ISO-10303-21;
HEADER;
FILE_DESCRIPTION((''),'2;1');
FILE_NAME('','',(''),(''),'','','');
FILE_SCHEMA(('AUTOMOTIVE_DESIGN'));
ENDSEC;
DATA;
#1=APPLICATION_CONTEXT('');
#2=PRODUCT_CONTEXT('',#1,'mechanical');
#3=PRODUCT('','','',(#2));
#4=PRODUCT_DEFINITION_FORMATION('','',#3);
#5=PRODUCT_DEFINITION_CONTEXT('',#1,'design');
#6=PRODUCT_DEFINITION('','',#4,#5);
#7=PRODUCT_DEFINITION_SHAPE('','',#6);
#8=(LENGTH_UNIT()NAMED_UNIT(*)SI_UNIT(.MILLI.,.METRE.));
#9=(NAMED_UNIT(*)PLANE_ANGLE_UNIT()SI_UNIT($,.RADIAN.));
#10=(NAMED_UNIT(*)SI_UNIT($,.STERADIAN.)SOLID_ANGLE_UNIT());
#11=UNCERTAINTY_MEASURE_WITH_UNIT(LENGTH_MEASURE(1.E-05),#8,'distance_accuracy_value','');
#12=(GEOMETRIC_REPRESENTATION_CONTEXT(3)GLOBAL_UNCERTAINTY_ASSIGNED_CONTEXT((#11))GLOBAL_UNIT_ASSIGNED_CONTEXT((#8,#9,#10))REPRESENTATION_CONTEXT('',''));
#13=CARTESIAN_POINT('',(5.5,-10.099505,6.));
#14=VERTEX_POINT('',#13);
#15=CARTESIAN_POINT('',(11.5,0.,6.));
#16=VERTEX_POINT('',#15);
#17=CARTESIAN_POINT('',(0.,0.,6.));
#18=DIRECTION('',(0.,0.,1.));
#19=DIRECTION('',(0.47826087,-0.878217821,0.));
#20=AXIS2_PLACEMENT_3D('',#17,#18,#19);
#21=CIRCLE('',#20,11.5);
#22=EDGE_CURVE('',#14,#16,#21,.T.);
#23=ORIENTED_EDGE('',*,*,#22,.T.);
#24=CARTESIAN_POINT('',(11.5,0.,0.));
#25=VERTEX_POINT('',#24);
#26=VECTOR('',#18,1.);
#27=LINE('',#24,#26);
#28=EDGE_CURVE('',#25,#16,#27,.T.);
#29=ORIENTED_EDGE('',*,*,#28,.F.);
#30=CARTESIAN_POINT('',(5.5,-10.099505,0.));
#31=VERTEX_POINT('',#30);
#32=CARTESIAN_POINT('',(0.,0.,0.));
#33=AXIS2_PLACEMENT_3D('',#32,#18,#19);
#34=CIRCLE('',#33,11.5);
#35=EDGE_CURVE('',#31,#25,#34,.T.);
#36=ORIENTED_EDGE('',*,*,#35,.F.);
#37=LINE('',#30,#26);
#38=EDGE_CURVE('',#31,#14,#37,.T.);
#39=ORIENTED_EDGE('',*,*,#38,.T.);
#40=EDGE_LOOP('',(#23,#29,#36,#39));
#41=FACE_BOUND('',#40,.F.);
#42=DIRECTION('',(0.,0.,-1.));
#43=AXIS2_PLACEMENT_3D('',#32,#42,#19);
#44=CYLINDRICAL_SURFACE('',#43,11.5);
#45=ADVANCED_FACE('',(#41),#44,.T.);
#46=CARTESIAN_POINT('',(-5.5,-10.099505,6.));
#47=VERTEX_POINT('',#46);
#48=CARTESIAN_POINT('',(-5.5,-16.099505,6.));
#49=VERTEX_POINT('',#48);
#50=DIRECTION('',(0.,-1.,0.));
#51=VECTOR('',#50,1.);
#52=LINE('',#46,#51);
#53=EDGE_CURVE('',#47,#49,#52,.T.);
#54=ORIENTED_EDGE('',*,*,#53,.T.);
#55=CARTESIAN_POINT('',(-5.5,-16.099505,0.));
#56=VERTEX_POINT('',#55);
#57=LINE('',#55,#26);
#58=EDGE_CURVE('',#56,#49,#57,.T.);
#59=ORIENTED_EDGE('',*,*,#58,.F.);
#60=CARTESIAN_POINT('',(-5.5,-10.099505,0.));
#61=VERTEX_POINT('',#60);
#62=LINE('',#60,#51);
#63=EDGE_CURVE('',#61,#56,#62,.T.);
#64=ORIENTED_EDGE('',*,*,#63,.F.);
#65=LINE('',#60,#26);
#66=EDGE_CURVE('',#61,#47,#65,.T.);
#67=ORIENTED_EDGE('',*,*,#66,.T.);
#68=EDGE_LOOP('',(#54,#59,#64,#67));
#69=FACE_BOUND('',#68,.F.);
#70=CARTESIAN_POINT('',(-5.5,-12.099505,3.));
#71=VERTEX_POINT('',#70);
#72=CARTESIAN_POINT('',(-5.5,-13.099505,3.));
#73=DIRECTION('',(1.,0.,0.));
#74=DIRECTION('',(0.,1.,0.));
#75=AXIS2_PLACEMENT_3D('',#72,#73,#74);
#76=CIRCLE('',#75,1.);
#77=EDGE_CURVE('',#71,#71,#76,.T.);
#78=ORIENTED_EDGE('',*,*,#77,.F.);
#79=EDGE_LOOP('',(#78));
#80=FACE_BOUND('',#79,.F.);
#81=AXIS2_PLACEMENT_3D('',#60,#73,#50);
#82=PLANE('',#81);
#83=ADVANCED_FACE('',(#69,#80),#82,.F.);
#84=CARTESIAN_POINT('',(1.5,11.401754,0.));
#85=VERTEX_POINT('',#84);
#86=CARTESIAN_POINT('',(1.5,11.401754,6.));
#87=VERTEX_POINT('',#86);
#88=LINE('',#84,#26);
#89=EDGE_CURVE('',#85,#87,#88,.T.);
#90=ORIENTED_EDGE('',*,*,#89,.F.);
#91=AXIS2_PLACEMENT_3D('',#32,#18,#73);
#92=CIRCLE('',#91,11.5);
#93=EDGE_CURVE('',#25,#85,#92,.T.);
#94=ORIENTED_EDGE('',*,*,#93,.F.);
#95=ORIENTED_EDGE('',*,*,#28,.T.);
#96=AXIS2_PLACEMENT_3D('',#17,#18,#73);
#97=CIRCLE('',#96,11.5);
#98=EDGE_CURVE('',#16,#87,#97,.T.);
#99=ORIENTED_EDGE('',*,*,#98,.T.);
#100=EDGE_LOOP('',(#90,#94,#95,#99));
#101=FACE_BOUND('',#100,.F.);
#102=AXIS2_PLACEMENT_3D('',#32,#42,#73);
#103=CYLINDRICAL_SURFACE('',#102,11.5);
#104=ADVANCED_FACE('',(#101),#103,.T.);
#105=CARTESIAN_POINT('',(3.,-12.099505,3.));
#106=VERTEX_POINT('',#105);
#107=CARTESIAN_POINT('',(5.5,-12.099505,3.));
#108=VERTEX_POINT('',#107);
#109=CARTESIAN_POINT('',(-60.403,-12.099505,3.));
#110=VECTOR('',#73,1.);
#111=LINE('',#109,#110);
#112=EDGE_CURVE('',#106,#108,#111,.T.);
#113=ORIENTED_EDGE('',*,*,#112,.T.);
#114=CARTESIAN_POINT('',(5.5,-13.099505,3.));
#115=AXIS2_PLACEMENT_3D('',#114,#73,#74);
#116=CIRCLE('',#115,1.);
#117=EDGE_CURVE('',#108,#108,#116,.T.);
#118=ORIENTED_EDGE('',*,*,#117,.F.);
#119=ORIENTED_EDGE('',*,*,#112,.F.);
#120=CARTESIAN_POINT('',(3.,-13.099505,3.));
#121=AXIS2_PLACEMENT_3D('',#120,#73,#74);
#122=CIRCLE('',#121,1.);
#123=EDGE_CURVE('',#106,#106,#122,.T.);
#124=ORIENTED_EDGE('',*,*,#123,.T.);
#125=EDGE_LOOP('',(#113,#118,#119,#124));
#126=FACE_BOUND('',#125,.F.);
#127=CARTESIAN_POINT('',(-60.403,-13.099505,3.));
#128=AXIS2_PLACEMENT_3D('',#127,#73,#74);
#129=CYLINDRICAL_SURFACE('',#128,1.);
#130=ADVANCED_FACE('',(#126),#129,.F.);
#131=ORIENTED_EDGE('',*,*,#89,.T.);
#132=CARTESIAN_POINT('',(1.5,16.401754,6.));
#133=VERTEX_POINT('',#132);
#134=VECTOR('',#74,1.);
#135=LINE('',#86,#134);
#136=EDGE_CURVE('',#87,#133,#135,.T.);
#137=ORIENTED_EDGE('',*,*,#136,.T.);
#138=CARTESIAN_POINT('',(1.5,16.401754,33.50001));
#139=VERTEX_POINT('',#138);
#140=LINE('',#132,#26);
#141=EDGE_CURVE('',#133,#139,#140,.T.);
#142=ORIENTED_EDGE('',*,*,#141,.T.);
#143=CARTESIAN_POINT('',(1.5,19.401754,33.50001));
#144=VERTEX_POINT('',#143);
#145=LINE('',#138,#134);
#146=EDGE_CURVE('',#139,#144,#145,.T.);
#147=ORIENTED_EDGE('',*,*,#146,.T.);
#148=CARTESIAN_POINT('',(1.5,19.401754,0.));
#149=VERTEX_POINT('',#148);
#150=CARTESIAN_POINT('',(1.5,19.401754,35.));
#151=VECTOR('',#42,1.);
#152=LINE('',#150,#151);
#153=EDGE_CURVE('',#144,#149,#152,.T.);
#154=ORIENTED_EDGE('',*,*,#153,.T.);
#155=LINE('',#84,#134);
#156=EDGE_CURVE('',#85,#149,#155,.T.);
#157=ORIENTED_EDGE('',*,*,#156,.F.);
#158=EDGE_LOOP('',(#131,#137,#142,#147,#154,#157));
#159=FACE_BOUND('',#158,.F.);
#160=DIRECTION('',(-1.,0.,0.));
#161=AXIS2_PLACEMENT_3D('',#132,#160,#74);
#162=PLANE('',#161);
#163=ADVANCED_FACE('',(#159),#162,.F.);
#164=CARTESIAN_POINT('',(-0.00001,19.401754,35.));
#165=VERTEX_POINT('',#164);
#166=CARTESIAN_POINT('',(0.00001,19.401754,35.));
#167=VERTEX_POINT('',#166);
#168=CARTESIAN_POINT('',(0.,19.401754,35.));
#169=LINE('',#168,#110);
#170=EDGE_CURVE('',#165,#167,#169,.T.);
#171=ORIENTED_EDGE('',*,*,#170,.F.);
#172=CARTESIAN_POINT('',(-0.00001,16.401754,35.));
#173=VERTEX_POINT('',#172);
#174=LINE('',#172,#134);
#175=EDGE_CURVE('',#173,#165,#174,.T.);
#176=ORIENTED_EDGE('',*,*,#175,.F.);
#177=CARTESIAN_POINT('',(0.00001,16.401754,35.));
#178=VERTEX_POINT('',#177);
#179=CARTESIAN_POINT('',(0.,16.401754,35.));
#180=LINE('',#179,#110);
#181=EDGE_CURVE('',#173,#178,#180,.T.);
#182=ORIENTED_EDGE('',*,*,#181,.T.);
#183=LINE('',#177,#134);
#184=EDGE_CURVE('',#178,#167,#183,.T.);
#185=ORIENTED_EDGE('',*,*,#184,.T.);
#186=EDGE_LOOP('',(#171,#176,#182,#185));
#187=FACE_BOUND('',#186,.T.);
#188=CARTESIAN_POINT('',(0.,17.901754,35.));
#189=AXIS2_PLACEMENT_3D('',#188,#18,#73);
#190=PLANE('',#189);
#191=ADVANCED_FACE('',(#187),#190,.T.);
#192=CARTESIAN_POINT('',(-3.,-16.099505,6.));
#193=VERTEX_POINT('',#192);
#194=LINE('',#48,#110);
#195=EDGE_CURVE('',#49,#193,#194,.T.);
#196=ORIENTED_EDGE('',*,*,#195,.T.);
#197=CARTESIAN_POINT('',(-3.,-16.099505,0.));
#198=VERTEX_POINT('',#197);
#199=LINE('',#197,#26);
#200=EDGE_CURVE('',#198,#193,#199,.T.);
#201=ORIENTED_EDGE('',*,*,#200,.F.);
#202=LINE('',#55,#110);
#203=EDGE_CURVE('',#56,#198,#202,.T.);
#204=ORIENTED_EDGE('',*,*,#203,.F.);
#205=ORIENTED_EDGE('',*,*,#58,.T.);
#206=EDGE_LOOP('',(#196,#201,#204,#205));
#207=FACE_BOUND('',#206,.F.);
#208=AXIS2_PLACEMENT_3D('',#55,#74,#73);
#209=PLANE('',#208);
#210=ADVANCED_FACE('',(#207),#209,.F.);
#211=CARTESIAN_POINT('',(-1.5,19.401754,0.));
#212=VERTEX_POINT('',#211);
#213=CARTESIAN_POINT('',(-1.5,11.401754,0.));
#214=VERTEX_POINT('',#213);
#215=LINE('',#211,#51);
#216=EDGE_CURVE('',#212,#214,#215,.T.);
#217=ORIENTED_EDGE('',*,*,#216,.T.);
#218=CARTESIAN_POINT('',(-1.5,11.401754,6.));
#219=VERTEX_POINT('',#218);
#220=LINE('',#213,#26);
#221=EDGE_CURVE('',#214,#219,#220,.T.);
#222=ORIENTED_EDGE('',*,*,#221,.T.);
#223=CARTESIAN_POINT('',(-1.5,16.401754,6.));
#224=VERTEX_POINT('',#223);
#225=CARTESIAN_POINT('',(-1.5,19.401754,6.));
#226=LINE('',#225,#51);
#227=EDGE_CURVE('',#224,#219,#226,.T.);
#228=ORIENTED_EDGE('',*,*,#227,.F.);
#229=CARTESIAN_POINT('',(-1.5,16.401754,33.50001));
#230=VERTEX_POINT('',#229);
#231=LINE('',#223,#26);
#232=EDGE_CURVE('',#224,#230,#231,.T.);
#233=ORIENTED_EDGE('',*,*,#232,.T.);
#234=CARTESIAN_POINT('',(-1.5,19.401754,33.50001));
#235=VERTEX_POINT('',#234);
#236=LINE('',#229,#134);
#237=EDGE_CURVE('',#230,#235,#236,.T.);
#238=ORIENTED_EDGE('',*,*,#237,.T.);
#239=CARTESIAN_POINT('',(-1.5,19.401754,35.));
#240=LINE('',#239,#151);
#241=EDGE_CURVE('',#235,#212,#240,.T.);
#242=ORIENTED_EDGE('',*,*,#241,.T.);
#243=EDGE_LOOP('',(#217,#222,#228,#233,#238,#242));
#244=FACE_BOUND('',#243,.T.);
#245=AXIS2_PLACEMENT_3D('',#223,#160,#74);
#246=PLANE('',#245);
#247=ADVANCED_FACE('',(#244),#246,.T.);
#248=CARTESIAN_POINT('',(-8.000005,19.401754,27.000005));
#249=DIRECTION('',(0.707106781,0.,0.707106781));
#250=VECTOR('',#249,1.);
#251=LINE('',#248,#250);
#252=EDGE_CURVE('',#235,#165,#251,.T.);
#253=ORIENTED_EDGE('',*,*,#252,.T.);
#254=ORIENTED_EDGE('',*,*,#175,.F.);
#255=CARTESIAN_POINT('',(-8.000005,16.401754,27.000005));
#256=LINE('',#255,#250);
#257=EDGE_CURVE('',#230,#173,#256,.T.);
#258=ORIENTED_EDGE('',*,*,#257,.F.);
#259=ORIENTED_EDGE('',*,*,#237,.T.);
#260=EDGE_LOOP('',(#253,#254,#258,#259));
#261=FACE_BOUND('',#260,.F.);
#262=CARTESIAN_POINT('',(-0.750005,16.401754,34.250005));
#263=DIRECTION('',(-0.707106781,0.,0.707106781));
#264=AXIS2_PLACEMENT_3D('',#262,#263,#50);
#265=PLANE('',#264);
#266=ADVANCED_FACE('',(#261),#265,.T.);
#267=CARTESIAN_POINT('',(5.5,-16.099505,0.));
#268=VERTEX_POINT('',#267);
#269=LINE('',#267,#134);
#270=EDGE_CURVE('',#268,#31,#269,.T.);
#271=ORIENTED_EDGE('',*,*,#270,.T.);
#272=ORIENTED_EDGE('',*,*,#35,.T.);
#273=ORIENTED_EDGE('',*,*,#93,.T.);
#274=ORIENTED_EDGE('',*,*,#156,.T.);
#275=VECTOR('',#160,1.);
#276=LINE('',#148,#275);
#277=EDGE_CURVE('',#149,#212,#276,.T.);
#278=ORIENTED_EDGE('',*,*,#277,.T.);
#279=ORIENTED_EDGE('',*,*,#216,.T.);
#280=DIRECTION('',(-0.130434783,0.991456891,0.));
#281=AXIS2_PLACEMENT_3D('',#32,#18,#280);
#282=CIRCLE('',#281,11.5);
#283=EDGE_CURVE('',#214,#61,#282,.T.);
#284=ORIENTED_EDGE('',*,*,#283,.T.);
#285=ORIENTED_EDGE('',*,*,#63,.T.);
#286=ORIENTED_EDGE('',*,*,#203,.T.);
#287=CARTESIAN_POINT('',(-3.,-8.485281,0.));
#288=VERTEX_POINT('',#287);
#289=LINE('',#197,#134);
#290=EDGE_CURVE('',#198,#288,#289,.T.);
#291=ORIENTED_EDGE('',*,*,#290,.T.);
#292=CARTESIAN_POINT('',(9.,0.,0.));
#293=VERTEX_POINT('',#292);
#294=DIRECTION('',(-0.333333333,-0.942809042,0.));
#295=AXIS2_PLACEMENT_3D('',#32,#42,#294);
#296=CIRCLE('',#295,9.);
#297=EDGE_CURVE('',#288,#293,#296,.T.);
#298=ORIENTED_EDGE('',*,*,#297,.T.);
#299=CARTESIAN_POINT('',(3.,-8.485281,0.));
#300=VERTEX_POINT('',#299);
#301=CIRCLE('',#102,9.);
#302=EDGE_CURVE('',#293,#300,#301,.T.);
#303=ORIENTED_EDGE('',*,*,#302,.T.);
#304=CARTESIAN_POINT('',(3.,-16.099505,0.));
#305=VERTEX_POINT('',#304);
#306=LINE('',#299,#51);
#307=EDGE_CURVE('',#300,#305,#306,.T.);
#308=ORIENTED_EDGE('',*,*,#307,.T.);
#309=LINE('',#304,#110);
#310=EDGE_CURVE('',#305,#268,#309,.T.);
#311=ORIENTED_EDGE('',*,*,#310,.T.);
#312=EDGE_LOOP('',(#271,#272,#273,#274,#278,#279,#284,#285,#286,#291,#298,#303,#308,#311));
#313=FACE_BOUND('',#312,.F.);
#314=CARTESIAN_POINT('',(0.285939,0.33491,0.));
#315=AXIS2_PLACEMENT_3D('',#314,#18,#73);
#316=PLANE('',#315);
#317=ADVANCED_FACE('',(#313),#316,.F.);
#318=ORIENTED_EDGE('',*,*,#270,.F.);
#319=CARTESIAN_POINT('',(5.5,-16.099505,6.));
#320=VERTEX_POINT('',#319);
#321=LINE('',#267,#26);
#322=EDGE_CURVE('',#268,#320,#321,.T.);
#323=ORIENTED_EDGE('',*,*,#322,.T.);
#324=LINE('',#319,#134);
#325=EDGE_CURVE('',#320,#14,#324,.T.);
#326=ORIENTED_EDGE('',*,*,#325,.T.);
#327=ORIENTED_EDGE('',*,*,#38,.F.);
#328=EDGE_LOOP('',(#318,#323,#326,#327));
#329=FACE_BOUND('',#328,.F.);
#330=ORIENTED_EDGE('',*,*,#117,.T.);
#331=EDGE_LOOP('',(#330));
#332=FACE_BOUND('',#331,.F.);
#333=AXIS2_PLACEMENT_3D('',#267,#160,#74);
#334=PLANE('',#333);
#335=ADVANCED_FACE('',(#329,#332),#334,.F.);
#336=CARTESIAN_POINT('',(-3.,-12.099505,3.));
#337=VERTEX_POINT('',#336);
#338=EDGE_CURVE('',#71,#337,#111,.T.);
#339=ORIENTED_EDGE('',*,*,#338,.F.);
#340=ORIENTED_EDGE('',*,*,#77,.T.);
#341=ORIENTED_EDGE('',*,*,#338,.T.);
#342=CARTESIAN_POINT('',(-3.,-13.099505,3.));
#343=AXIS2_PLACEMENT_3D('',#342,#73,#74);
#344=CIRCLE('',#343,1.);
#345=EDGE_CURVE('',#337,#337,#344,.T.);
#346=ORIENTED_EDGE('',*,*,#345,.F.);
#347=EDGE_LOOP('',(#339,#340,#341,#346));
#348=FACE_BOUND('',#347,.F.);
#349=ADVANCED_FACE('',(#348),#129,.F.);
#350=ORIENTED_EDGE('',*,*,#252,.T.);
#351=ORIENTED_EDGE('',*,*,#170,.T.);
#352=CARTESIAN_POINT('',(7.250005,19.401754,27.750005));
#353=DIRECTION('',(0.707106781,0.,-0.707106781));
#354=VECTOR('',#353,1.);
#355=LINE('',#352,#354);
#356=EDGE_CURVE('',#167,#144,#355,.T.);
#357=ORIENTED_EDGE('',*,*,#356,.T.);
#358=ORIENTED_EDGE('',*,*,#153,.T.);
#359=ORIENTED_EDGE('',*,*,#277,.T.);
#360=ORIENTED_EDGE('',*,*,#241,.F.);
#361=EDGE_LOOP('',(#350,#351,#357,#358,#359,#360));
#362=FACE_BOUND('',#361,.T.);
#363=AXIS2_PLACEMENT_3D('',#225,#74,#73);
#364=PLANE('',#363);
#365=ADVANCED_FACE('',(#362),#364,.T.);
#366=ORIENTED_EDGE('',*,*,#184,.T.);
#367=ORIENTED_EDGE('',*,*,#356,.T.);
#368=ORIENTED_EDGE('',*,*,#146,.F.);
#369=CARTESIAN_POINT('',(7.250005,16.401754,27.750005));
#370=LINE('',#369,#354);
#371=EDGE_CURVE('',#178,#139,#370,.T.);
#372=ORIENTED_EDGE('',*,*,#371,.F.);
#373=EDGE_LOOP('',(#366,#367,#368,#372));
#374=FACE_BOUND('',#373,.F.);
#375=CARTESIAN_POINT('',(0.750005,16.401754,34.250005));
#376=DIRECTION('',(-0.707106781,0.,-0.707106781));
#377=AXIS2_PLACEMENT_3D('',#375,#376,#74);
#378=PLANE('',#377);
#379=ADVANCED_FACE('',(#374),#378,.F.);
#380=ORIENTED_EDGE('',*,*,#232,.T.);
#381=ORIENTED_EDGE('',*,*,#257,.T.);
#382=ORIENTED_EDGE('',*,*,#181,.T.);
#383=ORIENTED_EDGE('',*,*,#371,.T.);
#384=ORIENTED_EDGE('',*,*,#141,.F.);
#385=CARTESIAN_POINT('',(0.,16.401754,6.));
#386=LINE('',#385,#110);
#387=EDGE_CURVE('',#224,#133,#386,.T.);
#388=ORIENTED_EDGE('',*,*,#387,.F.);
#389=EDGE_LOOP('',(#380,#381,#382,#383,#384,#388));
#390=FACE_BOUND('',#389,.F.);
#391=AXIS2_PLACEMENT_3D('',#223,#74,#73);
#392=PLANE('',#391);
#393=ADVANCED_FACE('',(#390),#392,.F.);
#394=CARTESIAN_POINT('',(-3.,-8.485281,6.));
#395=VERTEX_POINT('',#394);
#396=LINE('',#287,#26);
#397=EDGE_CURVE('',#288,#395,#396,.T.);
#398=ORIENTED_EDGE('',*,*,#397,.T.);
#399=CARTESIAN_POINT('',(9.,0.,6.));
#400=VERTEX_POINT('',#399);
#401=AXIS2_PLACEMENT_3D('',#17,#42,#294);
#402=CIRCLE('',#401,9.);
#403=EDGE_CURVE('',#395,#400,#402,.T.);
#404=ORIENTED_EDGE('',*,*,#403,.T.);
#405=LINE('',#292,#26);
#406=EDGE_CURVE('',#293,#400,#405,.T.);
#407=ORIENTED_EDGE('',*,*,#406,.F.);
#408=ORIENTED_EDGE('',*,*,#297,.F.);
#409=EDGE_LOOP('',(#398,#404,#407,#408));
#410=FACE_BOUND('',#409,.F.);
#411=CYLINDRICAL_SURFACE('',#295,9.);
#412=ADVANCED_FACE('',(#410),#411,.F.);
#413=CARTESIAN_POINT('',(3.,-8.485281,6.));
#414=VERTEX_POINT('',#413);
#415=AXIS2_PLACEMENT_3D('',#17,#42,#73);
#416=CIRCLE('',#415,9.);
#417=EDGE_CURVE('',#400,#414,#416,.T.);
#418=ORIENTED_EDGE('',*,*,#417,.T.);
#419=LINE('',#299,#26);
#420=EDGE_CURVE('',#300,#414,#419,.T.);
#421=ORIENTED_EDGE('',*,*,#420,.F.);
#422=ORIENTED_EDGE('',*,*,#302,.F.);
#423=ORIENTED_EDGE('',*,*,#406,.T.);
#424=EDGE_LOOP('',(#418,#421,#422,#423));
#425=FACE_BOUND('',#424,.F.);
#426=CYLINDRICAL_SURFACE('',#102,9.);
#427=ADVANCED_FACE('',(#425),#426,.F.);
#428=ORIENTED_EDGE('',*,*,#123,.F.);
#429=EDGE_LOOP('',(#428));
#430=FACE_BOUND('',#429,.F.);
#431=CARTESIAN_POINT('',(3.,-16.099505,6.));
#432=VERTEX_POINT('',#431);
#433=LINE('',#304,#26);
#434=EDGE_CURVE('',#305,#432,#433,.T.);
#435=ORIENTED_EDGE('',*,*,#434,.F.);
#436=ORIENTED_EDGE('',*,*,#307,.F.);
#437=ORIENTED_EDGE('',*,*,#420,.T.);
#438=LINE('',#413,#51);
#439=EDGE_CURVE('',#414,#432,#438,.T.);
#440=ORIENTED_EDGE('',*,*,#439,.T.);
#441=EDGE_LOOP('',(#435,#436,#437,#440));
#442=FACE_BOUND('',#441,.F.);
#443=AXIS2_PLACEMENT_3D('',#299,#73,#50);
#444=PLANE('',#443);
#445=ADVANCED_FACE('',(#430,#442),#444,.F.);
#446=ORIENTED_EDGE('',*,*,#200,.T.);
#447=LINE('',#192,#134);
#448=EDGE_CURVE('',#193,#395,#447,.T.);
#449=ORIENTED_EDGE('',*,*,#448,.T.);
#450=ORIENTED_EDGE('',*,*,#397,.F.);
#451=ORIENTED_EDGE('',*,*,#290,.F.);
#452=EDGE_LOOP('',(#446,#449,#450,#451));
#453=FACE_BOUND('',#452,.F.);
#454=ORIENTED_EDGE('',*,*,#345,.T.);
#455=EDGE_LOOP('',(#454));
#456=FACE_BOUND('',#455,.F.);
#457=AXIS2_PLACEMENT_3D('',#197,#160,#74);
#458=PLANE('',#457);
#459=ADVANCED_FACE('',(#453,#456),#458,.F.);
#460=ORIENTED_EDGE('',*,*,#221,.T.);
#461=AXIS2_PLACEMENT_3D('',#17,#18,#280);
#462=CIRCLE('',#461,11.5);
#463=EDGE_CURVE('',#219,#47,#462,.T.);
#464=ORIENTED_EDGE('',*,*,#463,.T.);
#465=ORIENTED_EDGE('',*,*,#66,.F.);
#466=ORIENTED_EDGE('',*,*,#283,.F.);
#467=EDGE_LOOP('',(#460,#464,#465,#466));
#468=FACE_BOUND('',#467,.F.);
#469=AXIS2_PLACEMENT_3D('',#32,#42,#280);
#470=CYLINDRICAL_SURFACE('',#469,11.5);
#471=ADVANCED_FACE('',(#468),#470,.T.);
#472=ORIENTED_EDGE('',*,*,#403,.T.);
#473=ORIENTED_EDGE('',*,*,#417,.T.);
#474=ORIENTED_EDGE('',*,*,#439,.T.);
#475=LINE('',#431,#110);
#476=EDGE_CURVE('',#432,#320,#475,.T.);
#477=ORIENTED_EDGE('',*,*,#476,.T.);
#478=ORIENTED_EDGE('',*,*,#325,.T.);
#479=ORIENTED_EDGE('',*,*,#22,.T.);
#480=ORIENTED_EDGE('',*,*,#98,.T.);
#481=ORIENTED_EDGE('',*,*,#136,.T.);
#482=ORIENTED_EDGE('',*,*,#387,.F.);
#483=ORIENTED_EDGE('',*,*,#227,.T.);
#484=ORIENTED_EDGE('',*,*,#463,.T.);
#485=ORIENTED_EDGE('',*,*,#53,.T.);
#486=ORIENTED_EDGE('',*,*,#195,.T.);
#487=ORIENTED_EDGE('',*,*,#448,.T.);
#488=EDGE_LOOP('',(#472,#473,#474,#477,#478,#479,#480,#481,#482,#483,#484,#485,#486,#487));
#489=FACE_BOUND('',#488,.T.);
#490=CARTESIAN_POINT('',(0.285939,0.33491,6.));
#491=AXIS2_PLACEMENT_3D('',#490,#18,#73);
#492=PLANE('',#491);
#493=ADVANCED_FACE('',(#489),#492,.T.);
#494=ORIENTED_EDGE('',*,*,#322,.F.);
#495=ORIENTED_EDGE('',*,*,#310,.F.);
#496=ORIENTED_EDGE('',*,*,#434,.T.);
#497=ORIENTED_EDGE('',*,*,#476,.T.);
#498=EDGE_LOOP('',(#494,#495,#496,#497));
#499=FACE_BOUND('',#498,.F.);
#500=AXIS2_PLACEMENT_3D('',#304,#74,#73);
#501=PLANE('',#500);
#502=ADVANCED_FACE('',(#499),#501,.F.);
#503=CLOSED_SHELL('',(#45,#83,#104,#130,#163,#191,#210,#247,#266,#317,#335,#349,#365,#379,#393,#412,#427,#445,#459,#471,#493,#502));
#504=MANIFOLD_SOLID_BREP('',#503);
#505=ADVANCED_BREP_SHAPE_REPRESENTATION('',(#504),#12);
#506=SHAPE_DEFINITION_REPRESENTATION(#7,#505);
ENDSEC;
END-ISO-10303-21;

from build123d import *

# Parameters (mm, degrees)
F1_DEPTH = 6
F2_W     = 3
F2_H     = 3
F3_DEPTH = 29
F5_D     = 2
F6_SIZE  = 1.49999


# Not quite as in the source:
# - a fillet or chamfer is up to 0.001 mm smaller than in the source, because OpenCascade refuses the exact size


with BuildPart() as f1:
    # F0 (on Top) → F1 (new body)
    with BuildSketch(Plane.XY):
        with BuildLine():
            ThreePointArc((-3, -8.4852813742), (-5.1961524227, 7.3484692283), (9, 0))
            ThreePointArc((9, 0), (7.3484692283, -5.1961524227), (3, -8.4852813742))
            Line((3, -8.4852813742), (3, -11.1018016556))
            ThreePointArc((3, -11.1018016556), (4.2794450198, -10.6740971666), (5.5, -10.0995049384))
            ThreePointArc((5.5, -10.0995049384), (9.8868599666, -5.8736700622), (11.5, 0))
            ThreePointArc((11.5, 0), (8.6458082329, 7.5828754441), (1.5, 11.401754251))
            ThreePointArc((1.5, 11.401754251), (0, 11.5), (-1.5, 11.401754251))
            ThreePointArc((-1.5, 11.401754251), (-11.3060177199, 2.103321972), (-5.5, -10.0995049384))
            ThreePointArc((-5.5, -10.0995049384), (-4.2794450198, -10.6740971666), (-3, -11.1018016556))
            Line((-3, -11.1018016556), (-3, -8.4852813742))
        make_face()
        with BuildLine():
            ThreePointArc((5.5, -10.0995049384), (4.2794450198, -10.6740971666), (3, -11.1018016556))
            Line((3, -11.1018016556), (3, -16.0995049384))
            Line((3, -16.0995049384), (5.5, -16.0995049384))
            Line((5.5, -16.0995049384), (5.5, -10.0995049384))
        make_face()
        with BuildLine():
            Line((-3, -16.0995049384), (-3, -11.1018016556))
            ThreePointArc((-3, -11.1018016556), (-4.2794450198, -10.6740971666), (-5.5, -10.0995049384))
            Line((-5.5, -10.0995049384), (-5.5, -16.0995049384))
            Line((-5.5, -16.0995049384), (-3, -16.0995049384))
        make_face()
        with BuildLine():
            Line((-1.5, 19.401754251), (-1.5, 11.401754251))
            ThreePointArc((-1.5, 11.401754251), (0, 11.5), (1.5, 11.401754251))
            Line((1.5, 11.401754251), (1.5, 19.401754251))
            Line((1.5, 19.401754251), (-1.5, 19.401754251))
        make_face()
    extrude(amount=F1_DEPTH)

    # F2 (on face) → F3 (join)
    with BuildSketch(Plane.XY.offset(6)):
        with Locations((0, 17.901754251)):
            Rectangle(F2_W, F2_H)
    extrude(amount=F3_DEPTH)

    # F5 (through all)
    with Locations(Plane(origin=(-5.5, 0, 0), x_dir=(0, -1, 0), z_dir=(-1, 0, 0))):
        with Locations((13.0995049384, 3)):
            Hole(F5_D / 2)

    # F6 (size 1.5 in the source; OpenCascade refuses exactly that, so slightly less here)
    f6_edges = [f1.edges().sort_by_distance(p)[0] for p in [
        (1.5, 17.901754, 35),
        (-1.5, 17.901754, 35),
    ]]
    chamfer(f6_edges, length=F6_SIZE)


solid = f1.part
